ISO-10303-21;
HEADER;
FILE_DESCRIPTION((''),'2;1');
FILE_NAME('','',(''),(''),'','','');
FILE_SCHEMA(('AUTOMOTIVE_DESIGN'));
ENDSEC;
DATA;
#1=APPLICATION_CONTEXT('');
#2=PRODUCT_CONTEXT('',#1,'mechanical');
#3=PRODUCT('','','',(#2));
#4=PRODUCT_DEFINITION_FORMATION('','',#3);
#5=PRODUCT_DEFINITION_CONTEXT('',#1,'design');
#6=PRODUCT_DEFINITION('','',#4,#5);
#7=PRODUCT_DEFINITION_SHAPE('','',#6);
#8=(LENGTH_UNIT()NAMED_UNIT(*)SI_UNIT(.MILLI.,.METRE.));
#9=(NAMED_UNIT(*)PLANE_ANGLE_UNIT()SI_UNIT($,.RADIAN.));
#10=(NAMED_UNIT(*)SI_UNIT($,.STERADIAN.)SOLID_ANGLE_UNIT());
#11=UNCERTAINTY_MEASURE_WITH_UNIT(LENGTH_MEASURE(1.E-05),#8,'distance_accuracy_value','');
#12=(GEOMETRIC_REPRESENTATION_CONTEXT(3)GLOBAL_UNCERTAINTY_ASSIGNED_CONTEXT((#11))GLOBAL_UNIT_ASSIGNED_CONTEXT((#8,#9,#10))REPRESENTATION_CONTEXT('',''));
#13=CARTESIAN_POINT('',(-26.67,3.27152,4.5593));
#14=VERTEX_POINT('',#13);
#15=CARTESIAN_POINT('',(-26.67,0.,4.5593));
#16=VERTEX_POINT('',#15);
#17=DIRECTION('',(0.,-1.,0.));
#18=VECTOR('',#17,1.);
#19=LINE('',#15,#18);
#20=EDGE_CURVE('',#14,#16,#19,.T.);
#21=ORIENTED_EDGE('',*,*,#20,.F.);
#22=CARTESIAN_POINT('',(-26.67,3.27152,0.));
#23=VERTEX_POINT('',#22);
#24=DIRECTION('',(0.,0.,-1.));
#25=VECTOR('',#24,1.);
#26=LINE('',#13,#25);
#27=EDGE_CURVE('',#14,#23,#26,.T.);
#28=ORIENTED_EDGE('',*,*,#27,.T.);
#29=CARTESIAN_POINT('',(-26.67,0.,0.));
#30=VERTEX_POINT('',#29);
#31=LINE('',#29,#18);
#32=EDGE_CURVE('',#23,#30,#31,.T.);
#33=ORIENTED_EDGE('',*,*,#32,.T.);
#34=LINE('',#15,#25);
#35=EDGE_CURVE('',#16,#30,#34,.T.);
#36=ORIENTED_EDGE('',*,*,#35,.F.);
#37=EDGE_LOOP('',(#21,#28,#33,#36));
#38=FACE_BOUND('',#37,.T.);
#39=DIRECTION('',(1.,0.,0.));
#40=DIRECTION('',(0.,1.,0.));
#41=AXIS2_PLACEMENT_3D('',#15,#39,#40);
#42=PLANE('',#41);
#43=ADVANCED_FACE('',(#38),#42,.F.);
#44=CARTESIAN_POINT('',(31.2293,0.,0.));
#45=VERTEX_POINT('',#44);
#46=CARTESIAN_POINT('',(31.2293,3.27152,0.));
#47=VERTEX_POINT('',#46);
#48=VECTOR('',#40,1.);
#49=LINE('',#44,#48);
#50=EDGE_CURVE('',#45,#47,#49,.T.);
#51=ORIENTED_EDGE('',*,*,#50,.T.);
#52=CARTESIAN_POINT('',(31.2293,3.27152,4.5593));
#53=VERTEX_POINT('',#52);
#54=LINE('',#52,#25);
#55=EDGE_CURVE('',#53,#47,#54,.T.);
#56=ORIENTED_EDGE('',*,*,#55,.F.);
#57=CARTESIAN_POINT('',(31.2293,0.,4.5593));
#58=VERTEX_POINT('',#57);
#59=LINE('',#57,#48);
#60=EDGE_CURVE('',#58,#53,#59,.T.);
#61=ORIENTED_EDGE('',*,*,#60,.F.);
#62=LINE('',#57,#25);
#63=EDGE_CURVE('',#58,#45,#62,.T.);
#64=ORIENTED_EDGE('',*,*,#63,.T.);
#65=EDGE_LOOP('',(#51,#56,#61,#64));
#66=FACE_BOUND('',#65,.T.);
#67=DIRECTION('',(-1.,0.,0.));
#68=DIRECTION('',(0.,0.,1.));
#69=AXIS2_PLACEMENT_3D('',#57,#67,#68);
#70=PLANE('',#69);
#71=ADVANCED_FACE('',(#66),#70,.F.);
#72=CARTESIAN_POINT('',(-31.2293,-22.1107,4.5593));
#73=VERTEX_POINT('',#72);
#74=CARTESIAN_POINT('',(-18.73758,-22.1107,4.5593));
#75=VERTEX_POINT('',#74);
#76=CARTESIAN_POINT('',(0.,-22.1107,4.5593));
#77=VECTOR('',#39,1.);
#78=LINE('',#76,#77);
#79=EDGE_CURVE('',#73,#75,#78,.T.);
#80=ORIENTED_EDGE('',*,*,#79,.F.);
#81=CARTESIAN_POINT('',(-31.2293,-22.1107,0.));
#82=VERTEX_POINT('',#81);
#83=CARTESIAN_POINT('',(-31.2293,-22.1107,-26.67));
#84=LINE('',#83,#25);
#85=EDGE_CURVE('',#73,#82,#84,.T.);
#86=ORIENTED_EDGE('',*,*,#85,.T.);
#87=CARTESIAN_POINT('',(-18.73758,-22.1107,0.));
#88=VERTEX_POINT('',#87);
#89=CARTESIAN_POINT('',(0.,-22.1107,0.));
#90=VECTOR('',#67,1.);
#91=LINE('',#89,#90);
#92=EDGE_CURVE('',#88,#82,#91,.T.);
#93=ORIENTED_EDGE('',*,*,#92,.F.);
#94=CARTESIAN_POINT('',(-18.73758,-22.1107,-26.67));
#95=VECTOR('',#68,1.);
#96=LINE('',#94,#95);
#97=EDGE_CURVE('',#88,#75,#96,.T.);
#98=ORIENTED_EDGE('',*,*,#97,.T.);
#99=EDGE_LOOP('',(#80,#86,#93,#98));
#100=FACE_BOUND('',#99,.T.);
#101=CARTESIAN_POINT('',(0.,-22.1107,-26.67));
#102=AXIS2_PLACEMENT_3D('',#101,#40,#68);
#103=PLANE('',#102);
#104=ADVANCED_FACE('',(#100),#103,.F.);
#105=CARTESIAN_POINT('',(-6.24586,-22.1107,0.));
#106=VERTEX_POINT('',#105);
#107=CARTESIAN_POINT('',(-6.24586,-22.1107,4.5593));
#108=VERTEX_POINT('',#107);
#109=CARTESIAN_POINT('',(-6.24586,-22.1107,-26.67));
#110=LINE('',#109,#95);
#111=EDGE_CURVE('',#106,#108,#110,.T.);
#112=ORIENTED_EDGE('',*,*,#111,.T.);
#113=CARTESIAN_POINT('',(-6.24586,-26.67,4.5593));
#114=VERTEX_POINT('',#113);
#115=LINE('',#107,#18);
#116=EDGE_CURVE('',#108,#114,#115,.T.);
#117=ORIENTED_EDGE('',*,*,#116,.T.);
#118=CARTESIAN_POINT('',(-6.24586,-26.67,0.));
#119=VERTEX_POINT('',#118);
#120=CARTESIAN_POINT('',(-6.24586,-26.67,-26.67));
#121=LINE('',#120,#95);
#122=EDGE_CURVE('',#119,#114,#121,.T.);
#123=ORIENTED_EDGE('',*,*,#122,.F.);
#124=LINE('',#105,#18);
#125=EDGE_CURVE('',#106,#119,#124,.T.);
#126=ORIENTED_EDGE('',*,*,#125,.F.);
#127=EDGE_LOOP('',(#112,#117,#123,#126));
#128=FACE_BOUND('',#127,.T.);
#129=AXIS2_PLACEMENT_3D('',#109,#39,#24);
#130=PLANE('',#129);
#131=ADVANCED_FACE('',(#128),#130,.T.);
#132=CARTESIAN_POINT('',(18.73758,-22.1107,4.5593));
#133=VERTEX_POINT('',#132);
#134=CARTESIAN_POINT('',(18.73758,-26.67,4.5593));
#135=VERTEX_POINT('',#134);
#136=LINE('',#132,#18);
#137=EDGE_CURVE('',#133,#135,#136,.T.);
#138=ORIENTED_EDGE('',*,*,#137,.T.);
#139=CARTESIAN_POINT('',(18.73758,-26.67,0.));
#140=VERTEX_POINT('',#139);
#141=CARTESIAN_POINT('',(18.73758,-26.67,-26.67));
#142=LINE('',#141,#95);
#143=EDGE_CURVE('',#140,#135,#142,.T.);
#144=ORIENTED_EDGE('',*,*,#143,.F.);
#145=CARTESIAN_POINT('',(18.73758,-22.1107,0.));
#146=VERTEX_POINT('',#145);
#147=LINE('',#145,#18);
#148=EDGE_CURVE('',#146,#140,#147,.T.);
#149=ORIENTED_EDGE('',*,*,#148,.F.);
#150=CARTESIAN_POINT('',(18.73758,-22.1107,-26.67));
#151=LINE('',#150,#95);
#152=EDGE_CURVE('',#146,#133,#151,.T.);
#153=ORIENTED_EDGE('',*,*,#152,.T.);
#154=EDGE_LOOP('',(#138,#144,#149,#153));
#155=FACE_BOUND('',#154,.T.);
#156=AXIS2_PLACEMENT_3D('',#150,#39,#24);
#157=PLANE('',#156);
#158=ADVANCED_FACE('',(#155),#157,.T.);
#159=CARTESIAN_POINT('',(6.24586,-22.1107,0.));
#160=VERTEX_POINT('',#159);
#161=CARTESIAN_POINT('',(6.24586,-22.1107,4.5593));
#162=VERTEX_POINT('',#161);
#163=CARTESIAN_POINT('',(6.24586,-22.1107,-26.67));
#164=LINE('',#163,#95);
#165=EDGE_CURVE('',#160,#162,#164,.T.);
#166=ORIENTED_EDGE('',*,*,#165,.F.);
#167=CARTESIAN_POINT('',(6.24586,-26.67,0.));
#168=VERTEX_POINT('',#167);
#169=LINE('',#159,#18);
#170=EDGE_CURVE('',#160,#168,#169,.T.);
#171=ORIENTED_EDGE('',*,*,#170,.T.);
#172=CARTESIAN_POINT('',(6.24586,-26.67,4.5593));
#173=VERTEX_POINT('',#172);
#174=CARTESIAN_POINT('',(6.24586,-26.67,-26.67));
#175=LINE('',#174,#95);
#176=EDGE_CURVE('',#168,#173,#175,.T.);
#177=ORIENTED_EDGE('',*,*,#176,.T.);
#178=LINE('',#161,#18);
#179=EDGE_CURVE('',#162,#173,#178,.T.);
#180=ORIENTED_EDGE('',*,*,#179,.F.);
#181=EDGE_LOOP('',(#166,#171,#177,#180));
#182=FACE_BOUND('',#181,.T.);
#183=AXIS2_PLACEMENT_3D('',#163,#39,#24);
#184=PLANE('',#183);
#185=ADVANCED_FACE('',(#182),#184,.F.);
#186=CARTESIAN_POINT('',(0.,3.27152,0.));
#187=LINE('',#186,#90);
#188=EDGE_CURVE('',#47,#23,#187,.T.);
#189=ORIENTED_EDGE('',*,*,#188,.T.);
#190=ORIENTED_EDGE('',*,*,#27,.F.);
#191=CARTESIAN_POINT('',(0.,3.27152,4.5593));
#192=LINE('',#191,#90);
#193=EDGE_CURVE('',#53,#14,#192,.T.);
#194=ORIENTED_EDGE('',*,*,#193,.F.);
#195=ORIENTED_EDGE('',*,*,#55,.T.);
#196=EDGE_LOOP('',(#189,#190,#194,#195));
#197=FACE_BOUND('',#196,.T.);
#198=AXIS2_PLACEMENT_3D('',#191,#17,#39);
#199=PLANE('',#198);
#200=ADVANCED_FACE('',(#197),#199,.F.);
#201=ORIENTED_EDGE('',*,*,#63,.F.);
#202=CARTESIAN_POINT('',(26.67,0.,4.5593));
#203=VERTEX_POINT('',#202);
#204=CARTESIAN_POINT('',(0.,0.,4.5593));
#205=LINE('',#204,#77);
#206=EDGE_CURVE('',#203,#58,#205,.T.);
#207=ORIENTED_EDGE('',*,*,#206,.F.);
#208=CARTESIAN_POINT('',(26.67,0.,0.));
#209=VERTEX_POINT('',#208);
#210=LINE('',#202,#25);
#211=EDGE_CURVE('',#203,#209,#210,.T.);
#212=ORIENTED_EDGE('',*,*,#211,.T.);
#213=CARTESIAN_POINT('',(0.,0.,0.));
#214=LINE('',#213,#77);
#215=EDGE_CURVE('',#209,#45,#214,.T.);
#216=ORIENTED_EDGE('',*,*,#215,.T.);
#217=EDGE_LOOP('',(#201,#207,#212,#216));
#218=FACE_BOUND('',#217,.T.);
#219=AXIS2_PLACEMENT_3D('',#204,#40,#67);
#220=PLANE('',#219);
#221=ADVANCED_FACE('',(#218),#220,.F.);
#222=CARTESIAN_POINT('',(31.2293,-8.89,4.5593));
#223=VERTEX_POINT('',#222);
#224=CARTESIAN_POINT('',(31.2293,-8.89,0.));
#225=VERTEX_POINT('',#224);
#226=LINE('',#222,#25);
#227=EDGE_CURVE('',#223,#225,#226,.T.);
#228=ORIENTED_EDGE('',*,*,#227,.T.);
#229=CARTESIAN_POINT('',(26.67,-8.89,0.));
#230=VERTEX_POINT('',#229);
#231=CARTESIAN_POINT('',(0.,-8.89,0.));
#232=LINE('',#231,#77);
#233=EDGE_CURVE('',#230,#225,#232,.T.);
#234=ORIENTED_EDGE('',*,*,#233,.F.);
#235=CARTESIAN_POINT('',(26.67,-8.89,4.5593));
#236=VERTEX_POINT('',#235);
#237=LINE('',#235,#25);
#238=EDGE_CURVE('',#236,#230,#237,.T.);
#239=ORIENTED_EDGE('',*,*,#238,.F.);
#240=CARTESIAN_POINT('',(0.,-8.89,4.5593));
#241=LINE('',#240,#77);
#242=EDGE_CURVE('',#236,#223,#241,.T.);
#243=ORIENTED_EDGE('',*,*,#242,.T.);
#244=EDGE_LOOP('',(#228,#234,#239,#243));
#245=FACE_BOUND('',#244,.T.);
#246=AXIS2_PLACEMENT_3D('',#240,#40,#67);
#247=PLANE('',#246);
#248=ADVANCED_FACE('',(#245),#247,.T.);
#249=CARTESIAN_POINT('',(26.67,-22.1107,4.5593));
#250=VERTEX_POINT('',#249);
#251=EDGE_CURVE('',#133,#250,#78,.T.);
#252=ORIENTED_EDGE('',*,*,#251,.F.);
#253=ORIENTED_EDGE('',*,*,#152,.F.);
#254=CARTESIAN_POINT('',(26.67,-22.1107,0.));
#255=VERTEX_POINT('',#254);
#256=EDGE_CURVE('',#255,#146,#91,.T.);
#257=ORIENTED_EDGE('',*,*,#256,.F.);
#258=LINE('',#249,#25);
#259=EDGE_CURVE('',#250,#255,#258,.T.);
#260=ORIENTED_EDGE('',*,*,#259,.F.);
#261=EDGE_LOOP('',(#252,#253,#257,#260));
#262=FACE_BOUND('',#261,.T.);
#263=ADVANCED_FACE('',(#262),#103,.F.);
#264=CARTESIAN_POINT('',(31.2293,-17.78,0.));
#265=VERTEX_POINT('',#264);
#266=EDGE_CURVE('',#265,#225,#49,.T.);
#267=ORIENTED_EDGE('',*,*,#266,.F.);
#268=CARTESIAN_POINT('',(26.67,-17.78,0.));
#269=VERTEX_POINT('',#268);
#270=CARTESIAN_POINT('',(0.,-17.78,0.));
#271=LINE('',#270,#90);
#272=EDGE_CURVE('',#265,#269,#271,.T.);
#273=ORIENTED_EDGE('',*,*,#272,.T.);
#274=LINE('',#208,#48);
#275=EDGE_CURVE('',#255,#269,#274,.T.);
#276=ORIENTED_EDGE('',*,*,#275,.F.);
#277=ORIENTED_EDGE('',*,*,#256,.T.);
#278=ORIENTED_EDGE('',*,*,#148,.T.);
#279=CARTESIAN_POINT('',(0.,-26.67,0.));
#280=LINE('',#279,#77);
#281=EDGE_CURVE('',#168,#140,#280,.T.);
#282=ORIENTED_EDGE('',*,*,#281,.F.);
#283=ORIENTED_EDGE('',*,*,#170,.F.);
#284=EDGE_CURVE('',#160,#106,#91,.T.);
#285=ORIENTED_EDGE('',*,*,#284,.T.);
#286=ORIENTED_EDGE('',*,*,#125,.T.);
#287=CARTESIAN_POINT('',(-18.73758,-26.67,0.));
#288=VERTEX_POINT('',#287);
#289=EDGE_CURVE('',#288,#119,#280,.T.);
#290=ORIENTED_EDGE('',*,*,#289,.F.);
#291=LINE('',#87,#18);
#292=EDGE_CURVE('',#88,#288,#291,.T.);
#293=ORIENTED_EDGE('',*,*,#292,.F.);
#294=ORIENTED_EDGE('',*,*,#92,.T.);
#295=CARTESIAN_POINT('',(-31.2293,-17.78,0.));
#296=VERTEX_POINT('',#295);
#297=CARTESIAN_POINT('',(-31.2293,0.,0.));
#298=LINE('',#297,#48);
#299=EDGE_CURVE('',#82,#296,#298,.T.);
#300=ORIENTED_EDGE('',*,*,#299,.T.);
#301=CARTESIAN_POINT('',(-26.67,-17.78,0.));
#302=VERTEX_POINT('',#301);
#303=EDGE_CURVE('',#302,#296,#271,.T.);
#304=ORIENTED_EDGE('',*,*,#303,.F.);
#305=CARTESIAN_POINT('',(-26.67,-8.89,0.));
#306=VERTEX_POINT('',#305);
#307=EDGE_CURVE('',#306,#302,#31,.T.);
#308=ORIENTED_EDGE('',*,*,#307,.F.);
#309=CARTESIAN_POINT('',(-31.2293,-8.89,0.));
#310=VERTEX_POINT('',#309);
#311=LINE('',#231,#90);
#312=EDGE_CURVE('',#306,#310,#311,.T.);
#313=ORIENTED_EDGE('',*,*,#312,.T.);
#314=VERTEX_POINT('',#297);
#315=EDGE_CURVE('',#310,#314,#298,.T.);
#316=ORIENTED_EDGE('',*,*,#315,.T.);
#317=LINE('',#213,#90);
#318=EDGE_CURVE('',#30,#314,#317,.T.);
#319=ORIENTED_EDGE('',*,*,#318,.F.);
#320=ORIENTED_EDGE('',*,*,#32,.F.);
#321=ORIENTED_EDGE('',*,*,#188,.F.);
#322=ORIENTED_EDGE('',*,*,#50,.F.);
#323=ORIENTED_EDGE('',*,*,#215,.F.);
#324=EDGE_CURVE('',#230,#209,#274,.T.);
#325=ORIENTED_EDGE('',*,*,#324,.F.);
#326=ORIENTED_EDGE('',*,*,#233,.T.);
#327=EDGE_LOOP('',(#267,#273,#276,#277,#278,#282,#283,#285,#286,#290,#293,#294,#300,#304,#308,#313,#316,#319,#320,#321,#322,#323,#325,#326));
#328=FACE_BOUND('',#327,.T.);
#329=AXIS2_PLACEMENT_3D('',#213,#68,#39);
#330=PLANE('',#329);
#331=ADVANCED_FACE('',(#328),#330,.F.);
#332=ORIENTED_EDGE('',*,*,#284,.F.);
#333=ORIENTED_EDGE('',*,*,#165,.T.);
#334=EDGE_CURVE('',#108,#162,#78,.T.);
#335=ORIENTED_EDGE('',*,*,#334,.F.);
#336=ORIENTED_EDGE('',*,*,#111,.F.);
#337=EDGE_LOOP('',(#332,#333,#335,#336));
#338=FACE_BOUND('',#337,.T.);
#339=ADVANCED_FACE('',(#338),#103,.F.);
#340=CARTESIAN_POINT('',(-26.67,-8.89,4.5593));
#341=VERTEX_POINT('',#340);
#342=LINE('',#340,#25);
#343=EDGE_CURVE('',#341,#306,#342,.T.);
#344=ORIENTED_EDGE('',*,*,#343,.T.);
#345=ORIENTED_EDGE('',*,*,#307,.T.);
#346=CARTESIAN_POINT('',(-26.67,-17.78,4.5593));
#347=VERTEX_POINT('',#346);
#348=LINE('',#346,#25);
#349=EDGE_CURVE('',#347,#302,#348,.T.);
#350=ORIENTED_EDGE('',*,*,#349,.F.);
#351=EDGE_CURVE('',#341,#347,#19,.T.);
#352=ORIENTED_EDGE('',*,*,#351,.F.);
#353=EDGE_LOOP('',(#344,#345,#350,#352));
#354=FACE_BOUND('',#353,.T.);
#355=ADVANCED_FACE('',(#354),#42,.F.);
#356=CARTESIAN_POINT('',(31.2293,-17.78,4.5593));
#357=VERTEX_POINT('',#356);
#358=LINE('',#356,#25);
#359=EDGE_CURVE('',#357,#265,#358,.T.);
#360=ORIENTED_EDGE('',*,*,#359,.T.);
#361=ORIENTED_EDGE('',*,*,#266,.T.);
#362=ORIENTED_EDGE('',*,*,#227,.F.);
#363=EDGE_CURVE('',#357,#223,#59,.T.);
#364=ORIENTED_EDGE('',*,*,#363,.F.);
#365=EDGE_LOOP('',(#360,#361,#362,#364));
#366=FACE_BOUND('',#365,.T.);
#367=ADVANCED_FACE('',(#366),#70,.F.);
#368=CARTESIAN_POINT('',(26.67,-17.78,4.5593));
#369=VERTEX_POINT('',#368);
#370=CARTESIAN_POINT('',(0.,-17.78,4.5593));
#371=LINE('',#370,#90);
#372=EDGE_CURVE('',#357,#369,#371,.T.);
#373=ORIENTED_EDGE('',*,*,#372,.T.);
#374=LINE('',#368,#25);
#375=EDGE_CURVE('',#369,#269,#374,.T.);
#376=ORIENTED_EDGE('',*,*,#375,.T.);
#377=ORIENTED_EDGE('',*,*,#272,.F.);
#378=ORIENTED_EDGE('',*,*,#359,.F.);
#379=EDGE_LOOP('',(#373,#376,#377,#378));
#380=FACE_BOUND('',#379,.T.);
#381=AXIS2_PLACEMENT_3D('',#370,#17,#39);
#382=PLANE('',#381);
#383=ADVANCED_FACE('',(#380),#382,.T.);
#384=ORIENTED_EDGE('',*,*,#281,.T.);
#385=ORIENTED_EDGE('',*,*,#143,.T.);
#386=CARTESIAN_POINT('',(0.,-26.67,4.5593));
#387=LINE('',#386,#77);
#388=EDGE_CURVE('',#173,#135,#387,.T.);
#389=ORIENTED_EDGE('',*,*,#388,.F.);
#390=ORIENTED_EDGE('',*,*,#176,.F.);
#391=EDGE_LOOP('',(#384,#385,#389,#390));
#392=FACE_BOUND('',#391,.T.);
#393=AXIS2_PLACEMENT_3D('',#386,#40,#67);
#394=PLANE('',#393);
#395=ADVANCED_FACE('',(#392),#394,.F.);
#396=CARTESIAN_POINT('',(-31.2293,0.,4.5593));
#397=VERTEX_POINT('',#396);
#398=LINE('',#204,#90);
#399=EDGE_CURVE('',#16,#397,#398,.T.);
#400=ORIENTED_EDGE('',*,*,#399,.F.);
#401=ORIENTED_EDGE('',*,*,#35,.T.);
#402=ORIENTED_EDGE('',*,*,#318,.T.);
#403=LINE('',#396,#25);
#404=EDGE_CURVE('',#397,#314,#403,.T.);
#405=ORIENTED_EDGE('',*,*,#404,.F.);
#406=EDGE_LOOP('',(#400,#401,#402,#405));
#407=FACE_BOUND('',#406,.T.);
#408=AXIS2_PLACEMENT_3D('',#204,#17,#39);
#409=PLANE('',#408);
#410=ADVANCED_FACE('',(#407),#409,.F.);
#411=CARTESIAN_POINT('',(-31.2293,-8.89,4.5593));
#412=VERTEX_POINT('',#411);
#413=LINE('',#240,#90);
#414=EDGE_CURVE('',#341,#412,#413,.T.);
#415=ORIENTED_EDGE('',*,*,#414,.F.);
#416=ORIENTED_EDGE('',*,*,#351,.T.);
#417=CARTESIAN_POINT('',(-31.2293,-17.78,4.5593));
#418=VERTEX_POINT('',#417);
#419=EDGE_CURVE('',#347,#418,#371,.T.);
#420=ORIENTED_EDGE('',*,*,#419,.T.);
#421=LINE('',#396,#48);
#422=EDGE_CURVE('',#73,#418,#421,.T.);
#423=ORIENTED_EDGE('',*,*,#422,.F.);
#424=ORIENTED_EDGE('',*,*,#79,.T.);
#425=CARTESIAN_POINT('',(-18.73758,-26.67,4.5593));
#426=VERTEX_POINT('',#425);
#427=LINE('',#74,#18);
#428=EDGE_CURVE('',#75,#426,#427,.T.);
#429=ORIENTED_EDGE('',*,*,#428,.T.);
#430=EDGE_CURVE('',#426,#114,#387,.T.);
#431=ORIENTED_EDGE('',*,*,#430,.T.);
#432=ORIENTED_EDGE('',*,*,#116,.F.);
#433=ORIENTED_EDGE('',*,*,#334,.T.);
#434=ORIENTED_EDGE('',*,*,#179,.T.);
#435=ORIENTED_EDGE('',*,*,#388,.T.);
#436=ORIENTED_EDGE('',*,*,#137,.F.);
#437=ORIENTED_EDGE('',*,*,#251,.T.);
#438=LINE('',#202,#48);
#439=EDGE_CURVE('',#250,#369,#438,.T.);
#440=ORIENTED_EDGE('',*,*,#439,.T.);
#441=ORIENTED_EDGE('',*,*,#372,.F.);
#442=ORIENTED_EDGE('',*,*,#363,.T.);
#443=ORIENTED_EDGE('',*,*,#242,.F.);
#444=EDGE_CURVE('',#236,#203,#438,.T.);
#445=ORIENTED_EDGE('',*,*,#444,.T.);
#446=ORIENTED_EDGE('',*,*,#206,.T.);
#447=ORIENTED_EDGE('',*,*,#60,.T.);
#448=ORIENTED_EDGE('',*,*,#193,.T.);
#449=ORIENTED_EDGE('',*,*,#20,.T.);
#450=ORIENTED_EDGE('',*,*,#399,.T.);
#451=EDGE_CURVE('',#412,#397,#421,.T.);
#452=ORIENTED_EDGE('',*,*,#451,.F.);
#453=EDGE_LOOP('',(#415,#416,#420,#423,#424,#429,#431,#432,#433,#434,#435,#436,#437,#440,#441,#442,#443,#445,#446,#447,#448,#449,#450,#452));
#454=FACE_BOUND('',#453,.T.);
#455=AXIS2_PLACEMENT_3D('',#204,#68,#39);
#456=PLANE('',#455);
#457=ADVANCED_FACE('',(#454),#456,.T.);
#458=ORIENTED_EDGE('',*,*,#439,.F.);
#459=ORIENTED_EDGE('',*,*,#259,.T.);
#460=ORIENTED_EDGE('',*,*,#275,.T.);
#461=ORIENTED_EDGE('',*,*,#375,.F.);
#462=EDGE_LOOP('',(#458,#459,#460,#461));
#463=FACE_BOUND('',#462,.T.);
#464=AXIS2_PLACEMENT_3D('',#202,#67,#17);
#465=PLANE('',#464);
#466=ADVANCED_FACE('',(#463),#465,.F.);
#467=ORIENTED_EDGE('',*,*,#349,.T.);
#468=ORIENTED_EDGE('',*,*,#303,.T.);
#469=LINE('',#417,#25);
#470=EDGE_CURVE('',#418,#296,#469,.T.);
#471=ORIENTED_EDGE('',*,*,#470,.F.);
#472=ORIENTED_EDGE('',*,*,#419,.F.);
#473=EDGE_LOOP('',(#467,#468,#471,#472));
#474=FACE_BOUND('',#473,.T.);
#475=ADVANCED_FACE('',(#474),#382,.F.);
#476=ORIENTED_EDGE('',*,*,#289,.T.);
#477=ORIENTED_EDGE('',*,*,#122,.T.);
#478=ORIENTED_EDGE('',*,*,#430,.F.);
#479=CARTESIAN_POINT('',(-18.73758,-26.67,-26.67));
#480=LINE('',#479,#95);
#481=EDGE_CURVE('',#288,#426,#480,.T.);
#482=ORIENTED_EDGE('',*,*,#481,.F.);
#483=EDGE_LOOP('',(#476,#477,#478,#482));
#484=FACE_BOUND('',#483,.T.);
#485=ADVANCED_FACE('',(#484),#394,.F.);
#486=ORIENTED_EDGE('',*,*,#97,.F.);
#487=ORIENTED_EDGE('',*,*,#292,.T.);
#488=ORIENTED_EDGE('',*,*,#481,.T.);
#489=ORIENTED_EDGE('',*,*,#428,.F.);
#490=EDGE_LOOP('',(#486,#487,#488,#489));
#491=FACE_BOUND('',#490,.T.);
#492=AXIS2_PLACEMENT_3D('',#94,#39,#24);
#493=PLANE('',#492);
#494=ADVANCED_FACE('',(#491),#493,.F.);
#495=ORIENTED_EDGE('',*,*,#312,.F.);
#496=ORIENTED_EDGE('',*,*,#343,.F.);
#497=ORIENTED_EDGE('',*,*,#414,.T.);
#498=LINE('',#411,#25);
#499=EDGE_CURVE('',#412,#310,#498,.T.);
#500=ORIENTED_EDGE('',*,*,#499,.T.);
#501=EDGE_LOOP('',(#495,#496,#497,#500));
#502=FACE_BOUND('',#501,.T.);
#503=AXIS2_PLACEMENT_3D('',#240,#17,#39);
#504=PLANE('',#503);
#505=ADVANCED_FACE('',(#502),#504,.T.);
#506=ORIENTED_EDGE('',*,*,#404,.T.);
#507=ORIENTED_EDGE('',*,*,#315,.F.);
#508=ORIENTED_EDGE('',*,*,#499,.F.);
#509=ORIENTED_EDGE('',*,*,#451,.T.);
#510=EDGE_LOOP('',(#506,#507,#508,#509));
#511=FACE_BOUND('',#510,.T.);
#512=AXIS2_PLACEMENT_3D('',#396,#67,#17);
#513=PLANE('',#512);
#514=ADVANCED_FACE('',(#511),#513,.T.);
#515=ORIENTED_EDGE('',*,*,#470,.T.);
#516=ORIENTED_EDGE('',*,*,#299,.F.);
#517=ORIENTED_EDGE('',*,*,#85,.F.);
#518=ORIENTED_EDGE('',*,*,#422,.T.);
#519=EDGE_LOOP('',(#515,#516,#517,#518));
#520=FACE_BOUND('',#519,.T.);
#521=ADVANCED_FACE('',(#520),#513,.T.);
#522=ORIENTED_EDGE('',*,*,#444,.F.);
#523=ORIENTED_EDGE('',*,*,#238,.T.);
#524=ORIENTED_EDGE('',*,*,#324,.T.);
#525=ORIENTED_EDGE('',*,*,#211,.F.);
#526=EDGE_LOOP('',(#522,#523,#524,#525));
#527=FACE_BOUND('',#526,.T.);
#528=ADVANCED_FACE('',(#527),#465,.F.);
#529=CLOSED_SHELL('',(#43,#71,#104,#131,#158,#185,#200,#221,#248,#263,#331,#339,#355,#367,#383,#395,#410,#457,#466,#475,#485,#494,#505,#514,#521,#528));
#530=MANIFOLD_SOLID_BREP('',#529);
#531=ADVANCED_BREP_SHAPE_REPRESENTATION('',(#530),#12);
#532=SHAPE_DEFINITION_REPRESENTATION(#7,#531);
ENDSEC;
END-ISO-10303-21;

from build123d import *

# Parameters (mm, degrees)
BOSS_EXTRUDE1_DEPTH = 4.5593
CAVITY1_START       = -26.67
CAVITY1_OUTLINE_W   = 12.49172
CAVITY1_OUTLINE_H   = 4.5593
CAVITY1_OUTLINE_W_2 = 7.93242
CAVITY1_DEPTH       = 4.5593


# Read off the part's stored shape, not the designer's step: Cavity1
with BuildPart() as part:
    # Sketch1 → Boss-Extrude1 (new body)
    with BuildSketch(Plane.XY):
        Polygon((31.2293, 0), (31.2293, 3.27152), (-26.67, 3.27152), (-26.67, 0), (-31.2293, 0), (-31.2293, -8.89), (-26.67, -8.89), (-26.67, -17.78), (-31.2293, -17.78), (-31.2293, -26.67), (26.67, -26.67), (26.67, -17.78), (31.2293, -17.78), (31.2293, -8.89), (26.67, -8.89), (26.67, 0), align=None)
    extrude(amount=BOSS_EXTRUDE1_DEPTH)

    # Cavity1 outline → Cavity1 (cut)
    with BuildSketch(Plane(origin=(0, 0, 0), x_dir=(1, 0, 0), z_dir=(0, 1, 0)).offset(CAVITY1_START)):
        with Locations((-24.98344, -2.27965)):
            Rectangle(CAVITY1_OUTLINE_W, CAVITY1_OUTLINE_H)
        with Locations((0, -2.27965)):
            Rectangle(CAVITY1_OUTLINE_W, CAVITY1_OUTLINE_H)
        with Locations((22.70379, -2.27965)):
            Rectangle(CAVITY1_OUTLINE_W_2, CAVITY1_OUTLINE_H)
    extrude(amount=CAVITY1_DEPTH, mode=Mode.SUBTRACT)


solid = part.part
